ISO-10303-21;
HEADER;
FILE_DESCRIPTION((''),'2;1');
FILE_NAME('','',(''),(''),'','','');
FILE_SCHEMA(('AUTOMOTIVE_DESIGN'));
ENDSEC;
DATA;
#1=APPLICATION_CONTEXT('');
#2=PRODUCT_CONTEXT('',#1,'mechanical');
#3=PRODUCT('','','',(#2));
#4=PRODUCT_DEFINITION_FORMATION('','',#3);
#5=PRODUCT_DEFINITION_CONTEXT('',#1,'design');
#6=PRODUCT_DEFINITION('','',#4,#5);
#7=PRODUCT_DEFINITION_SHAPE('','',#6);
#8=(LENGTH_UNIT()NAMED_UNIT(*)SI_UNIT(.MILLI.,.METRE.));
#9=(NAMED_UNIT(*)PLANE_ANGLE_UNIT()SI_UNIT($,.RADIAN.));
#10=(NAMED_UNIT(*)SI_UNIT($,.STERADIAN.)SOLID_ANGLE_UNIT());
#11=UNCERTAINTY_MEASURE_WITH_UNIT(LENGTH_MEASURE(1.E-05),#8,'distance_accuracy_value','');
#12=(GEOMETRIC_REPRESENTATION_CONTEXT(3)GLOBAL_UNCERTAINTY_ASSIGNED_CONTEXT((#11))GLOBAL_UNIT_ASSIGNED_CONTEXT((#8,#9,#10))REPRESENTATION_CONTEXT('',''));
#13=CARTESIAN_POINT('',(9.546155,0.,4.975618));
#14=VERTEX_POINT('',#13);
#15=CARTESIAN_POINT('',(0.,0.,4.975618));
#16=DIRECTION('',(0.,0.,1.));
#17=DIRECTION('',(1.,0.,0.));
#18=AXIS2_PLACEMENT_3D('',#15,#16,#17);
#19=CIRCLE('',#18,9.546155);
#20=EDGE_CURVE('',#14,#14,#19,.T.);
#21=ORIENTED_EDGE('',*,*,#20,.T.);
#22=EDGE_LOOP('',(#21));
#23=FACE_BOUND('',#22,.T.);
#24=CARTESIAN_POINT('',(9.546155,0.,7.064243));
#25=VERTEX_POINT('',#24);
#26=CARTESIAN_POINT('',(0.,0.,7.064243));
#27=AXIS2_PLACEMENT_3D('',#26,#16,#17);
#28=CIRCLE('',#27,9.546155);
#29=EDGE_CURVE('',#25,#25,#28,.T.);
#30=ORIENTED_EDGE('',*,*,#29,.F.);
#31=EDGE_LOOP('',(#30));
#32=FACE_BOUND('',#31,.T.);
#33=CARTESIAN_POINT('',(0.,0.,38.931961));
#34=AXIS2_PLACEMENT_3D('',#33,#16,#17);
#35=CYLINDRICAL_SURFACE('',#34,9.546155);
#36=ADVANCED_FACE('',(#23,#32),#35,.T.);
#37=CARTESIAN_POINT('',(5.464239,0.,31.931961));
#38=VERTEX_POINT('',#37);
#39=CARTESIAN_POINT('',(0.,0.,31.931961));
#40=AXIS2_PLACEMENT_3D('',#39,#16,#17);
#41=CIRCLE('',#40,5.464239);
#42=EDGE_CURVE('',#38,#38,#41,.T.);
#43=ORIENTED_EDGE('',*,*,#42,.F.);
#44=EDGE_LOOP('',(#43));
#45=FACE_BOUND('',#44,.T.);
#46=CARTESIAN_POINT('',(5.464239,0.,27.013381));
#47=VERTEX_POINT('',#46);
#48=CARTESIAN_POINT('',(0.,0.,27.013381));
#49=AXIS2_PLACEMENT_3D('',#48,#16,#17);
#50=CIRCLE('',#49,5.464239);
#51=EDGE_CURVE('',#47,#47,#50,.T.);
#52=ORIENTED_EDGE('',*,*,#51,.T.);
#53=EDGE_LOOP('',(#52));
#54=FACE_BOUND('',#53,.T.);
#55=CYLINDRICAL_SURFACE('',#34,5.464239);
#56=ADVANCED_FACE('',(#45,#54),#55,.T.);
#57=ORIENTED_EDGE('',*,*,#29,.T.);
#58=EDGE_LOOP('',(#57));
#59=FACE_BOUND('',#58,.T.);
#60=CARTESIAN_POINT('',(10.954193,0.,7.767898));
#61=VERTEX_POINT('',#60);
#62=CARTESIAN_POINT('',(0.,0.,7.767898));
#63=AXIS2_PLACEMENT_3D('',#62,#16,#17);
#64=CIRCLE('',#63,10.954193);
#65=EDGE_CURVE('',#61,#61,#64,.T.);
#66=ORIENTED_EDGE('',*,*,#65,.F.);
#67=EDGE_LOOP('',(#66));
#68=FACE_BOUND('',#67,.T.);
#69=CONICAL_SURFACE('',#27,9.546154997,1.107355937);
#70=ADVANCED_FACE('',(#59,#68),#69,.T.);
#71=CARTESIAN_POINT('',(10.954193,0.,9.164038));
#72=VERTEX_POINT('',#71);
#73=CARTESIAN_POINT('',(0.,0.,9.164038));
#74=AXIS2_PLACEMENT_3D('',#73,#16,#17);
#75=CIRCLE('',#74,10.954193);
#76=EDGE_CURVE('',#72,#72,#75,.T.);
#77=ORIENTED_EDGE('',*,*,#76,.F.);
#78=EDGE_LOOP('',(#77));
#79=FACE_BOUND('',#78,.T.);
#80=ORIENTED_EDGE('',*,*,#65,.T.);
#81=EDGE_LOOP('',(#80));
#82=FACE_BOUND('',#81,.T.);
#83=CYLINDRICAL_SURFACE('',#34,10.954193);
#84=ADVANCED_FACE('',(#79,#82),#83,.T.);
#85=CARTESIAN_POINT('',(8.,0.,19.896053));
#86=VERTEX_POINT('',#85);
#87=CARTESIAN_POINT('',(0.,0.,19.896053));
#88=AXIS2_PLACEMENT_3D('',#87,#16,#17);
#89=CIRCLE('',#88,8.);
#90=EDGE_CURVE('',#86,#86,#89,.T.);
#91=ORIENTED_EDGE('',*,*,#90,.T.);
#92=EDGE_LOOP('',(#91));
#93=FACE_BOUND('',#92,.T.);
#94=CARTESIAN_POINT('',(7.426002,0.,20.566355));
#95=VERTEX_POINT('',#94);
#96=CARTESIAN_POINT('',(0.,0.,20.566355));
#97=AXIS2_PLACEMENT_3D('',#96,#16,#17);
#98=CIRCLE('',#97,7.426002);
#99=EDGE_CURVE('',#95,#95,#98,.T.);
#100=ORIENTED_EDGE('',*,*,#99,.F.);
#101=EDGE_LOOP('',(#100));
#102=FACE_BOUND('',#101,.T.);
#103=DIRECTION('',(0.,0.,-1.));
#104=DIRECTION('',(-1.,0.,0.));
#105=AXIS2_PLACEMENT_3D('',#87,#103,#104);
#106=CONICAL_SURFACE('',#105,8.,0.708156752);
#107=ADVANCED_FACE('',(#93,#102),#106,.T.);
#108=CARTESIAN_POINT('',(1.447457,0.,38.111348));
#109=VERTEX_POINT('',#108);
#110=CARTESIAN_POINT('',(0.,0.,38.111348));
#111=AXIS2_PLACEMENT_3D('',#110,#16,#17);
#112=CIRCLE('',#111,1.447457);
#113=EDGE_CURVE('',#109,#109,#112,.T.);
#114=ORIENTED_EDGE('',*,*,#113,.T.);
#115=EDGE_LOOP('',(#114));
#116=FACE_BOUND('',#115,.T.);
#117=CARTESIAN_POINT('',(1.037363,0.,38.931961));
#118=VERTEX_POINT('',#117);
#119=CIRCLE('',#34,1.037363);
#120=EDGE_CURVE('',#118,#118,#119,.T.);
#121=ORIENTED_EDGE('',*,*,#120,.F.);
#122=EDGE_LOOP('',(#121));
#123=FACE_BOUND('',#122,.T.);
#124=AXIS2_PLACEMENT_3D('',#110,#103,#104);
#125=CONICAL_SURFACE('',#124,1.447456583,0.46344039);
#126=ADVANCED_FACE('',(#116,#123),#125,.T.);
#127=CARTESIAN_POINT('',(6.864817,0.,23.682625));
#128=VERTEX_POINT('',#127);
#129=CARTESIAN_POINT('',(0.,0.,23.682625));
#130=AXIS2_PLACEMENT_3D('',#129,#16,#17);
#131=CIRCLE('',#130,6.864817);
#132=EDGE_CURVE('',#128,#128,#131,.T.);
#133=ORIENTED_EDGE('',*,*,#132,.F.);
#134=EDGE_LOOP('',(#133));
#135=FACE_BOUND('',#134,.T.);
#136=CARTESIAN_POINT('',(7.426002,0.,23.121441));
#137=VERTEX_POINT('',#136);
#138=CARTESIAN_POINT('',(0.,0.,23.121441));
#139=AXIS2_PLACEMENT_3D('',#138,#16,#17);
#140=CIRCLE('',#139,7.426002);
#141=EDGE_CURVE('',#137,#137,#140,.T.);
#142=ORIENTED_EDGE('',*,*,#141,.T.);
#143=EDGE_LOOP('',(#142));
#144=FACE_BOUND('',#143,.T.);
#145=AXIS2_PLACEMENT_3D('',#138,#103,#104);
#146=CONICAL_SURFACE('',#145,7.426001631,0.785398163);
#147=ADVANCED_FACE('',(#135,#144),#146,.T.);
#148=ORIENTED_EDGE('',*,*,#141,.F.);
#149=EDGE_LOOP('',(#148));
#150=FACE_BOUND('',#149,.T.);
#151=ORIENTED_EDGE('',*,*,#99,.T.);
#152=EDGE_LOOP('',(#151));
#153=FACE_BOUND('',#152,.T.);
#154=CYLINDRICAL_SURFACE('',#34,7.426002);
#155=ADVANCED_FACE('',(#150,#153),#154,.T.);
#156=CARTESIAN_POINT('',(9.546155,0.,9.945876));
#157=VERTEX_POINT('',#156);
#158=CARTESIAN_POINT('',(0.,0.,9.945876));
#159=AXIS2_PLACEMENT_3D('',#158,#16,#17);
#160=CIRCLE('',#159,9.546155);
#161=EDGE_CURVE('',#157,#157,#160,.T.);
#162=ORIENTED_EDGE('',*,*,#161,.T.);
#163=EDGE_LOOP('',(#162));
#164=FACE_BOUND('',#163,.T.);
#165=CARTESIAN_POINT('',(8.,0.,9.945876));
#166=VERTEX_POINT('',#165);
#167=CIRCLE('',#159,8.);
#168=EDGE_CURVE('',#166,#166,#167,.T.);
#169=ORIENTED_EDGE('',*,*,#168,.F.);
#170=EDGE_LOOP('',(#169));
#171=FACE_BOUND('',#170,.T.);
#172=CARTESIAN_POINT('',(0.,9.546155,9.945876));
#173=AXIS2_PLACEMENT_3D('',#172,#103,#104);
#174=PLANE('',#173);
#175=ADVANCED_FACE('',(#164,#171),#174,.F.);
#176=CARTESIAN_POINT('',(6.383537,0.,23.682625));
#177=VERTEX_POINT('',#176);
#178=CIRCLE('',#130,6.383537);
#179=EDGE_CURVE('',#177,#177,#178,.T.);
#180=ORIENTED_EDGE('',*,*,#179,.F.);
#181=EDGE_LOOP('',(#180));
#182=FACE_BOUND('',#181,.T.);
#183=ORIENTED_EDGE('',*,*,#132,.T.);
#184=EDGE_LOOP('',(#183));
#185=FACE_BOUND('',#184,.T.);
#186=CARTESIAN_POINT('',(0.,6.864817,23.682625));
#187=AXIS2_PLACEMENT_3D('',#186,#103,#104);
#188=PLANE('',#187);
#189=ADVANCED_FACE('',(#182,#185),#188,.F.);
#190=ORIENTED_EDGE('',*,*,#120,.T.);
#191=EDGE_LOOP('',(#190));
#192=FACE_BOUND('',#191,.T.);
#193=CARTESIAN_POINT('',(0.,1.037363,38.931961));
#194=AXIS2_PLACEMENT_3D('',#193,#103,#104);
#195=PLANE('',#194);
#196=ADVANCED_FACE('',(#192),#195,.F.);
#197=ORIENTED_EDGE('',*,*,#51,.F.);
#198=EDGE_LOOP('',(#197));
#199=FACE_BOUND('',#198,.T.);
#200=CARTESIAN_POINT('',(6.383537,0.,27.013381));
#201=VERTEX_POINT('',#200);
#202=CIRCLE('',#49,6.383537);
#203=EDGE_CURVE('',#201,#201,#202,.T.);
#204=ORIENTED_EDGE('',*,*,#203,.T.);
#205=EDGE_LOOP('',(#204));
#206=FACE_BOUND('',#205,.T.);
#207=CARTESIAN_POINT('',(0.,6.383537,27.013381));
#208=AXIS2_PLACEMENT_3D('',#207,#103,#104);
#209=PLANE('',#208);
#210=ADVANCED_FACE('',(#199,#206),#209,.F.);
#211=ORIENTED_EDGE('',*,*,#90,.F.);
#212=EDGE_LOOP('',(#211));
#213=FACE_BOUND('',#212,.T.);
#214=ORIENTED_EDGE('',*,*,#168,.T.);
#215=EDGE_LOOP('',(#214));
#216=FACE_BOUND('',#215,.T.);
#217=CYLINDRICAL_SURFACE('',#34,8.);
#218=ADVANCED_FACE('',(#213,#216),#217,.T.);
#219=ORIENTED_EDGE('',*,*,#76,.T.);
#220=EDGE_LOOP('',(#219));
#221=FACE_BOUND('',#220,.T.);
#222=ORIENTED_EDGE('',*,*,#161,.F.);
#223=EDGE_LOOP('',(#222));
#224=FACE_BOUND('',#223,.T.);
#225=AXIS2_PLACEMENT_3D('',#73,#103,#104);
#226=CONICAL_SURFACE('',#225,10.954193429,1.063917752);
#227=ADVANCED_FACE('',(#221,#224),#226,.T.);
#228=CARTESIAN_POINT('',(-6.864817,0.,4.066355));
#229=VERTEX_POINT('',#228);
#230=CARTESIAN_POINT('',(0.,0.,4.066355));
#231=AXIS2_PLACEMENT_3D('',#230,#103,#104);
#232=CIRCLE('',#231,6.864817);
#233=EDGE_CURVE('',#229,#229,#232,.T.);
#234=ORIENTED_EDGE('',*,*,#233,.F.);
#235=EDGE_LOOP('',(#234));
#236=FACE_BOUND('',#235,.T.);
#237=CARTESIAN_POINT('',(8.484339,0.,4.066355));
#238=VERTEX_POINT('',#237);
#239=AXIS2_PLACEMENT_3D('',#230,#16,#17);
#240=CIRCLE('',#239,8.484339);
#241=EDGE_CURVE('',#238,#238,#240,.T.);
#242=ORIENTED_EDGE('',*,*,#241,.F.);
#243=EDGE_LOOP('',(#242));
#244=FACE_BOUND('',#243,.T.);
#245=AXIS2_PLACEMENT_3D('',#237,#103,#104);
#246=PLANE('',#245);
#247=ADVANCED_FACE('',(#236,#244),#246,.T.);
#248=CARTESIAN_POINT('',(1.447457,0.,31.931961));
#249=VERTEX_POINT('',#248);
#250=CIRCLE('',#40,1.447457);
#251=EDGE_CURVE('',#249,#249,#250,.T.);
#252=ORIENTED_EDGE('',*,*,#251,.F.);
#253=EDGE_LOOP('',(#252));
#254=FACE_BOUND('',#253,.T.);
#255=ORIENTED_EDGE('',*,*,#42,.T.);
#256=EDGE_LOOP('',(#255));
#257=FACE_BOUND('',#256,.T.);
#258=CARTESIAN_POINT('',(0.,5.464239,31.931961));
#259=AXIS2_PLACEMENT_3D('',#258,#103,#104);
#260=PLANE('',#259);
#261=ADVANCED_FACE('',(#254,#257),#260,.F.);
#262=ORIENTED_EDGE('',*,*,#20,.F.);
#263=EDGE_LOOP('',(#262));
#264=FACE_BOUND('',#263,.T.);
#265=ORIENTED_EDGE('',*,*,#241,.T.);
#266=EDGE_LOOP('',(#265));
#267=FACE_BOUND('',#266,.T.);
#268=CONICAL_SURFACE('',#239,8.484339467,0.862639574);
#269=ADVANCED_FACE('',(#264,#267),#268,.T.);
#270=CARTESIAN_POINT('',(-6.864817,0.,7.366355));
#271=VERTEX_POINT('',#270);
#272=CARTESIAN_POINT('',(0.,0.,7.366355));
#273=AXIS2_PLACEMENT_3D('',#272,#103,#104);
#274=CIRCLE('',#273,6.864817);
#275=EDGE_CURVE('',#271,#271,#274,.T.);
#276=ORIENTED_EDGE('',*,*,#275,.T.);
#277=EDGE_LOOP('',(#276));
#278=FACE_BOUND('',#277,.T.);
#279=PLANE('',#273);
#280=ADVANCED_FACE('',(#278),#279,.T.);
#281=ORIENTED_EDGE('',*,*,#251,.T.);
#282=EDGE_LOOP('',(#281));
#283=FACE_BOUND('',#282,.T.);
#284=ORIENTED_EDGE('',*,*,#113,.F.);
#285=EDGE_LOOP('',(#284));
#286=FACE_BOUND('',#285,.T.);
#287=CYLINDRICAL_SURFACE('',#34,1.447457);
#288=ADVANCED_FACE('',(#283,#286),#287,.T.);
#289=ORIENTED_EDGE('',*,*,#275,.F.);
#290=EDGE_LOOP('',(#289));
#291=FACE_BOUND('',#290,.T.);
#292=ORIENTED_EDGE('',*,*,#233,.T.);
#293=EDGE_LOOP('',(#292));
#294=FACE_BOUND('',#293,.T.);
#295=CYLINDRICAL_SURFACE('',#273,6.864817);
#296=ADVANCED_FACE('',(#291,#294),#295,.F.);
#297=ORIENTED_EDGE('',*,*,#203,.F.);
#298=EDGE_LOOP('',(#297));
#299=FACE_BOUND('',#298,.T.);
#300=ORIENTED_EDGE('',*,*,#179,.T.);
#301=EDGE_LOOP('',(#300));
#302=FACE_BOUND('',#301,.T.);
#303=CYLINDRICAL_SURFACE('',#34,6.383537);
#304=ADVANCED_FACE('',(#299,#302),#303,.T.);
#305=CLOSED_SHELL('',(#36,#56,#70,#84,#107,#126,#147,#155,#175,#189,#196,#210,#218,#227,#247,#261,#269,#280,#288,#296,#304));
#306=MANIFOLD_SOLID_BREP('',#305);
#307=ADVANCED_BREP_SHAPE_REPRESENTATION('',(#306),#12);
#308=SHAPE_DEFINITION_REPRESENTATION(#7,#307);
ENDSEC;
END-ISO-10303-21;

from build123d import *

# Parameters (mm, degrees)
SKETCH6_R          = 6.864817117
CUT_EXTRUDE2_DEPTH = 3.3
SKETCH5_R          = 50.459472618
CUT_EXTRUDE1_DEPTH = 25


with BuildPart() as part:
    # Sketch1 → Revolve2 (revolve)
    with BuildSketch(Plane(origin=(0, 0, 0), x_dir=(0, 0, -1), z_dir=(1, 0, 0))):
        with BuildLine():
            Line((1.771e-06, 9.5), (1.771e-06, 7.445611339))
            Line((1.771e-06, 7.445611339), (-0.771464581, 7.445611339))
            Line((-0.771464581, 7.445611339), (-0.771464581, 6.864817117))
            Line((-0.771464581, 6.864817117), (-4.066354879, 6.864817117))
            Line((-4.066354879, 6.864817117), (-4.066354879, 8.484339467))
            Line((-4.066354879, 8.484339467), (-4.975618005, 9.546154997))
            Line((-4.975618005, 9.546154997), (-7.06424338, 9.546154997))
            Line((-7.06424338, 9.546154997), (-7.767897919, 10.954193429))
            Line((-7.767897919, 10.954193429), (-9.164037876, 10.954193429))
            Line((-9.164037876, 10.954193429), (-9.945876251, 9.546154997))
            Line((-9.945876251, 9.546154997), (-9.945876251, 8))
            Line((-9.945876251, 8), (-19.896053439, 8))
            Line((-19.896053439, 8), (-20.566354879, 7.426001631))
            Line((-20.566354879, 7.426001631), (-23.121440557, 7.426001631))
            Line((-23.121440557, 7.426001631), (-23.682625072, 6.864817117))
            Line((-23.682625072, 6.864817117), (-23.682625072, 6.383537324))
            Line((-23.682625072, 6.383537324), (-27.0133813, 6.383537324))
            Line((-27.0133813, 6.383537324), (-27.0133813, 5.464238658))
            Line((-27.0133813, 5.464238658), (-31.931960755, 5.464238658))
            Line((-31.931960755, 5.464238658), (-31.931960755, 1.447456583))
            Line((-31.931960755, 1.447456583), (-38.111348046, 1.447456583))
            Line((-38.111348046, 1.447456583), (-38.931960755, 1.037362766))
            Line((-38.931960755, 1.037362766), (-38.931960755, 0))
            Line((-38.931960755, 0), (2.933645121, 0))
            ThreePointArc((2.933645121, 0), (2.489100327, 4.831124101), (1.170397182, 9.5))
            Line((1.170397182, 9.5), (1.771e-06, 9.5))
        make_face()
    revolve(axis=Axis((0, 0, 38.931960755), (0, 0, -1)))


with BuildPart() as body_2:
    # Split1: the piece on the far side of the plane
    add(part.part)
    split(bisect_by=Plane(origin=(0, 6.864817117, 4.066354879), x_dir=(1, 0, 0), z_dir=(0, 0, 1)), keep=Keep.BOTTOM)

    # Sketch5 → Cut-Extrude1 (cut)
    with BuildSketch(Plane(origin=(0, 0, 4.066354879), x_dir=(-1, 0, 0), z_dir=(0, 0, -1))):
        Circle(SKETCH5_R)
    extrude(amount=CUT_EXTRUDE1_DEPTH, mode=Mode.SUBTRACT)


with BuildPart() as part_1:
    add(part.part)

    # Split1
    split(bisect_by=Plane(origin=(0, 6.864817117, 4.066354879), x_dir=(1, 0, 0), z_dir=(0, 0, 1)), keep=Keep.TOP)

    # Sketch6 → Cut-Extrude2 (cut)
    with BuildSketch(Plane(origin=(0, 0, 4.066354879), x_dir=(-1, 0, 0), z_dir=(0, 0, -1))):
        Circle(SKETCH6_R)
    extrude(amount=-CUT_EXTRUDE2_DEPTH, mode=Mode.SUBTRACT)


solid = part_1.part
